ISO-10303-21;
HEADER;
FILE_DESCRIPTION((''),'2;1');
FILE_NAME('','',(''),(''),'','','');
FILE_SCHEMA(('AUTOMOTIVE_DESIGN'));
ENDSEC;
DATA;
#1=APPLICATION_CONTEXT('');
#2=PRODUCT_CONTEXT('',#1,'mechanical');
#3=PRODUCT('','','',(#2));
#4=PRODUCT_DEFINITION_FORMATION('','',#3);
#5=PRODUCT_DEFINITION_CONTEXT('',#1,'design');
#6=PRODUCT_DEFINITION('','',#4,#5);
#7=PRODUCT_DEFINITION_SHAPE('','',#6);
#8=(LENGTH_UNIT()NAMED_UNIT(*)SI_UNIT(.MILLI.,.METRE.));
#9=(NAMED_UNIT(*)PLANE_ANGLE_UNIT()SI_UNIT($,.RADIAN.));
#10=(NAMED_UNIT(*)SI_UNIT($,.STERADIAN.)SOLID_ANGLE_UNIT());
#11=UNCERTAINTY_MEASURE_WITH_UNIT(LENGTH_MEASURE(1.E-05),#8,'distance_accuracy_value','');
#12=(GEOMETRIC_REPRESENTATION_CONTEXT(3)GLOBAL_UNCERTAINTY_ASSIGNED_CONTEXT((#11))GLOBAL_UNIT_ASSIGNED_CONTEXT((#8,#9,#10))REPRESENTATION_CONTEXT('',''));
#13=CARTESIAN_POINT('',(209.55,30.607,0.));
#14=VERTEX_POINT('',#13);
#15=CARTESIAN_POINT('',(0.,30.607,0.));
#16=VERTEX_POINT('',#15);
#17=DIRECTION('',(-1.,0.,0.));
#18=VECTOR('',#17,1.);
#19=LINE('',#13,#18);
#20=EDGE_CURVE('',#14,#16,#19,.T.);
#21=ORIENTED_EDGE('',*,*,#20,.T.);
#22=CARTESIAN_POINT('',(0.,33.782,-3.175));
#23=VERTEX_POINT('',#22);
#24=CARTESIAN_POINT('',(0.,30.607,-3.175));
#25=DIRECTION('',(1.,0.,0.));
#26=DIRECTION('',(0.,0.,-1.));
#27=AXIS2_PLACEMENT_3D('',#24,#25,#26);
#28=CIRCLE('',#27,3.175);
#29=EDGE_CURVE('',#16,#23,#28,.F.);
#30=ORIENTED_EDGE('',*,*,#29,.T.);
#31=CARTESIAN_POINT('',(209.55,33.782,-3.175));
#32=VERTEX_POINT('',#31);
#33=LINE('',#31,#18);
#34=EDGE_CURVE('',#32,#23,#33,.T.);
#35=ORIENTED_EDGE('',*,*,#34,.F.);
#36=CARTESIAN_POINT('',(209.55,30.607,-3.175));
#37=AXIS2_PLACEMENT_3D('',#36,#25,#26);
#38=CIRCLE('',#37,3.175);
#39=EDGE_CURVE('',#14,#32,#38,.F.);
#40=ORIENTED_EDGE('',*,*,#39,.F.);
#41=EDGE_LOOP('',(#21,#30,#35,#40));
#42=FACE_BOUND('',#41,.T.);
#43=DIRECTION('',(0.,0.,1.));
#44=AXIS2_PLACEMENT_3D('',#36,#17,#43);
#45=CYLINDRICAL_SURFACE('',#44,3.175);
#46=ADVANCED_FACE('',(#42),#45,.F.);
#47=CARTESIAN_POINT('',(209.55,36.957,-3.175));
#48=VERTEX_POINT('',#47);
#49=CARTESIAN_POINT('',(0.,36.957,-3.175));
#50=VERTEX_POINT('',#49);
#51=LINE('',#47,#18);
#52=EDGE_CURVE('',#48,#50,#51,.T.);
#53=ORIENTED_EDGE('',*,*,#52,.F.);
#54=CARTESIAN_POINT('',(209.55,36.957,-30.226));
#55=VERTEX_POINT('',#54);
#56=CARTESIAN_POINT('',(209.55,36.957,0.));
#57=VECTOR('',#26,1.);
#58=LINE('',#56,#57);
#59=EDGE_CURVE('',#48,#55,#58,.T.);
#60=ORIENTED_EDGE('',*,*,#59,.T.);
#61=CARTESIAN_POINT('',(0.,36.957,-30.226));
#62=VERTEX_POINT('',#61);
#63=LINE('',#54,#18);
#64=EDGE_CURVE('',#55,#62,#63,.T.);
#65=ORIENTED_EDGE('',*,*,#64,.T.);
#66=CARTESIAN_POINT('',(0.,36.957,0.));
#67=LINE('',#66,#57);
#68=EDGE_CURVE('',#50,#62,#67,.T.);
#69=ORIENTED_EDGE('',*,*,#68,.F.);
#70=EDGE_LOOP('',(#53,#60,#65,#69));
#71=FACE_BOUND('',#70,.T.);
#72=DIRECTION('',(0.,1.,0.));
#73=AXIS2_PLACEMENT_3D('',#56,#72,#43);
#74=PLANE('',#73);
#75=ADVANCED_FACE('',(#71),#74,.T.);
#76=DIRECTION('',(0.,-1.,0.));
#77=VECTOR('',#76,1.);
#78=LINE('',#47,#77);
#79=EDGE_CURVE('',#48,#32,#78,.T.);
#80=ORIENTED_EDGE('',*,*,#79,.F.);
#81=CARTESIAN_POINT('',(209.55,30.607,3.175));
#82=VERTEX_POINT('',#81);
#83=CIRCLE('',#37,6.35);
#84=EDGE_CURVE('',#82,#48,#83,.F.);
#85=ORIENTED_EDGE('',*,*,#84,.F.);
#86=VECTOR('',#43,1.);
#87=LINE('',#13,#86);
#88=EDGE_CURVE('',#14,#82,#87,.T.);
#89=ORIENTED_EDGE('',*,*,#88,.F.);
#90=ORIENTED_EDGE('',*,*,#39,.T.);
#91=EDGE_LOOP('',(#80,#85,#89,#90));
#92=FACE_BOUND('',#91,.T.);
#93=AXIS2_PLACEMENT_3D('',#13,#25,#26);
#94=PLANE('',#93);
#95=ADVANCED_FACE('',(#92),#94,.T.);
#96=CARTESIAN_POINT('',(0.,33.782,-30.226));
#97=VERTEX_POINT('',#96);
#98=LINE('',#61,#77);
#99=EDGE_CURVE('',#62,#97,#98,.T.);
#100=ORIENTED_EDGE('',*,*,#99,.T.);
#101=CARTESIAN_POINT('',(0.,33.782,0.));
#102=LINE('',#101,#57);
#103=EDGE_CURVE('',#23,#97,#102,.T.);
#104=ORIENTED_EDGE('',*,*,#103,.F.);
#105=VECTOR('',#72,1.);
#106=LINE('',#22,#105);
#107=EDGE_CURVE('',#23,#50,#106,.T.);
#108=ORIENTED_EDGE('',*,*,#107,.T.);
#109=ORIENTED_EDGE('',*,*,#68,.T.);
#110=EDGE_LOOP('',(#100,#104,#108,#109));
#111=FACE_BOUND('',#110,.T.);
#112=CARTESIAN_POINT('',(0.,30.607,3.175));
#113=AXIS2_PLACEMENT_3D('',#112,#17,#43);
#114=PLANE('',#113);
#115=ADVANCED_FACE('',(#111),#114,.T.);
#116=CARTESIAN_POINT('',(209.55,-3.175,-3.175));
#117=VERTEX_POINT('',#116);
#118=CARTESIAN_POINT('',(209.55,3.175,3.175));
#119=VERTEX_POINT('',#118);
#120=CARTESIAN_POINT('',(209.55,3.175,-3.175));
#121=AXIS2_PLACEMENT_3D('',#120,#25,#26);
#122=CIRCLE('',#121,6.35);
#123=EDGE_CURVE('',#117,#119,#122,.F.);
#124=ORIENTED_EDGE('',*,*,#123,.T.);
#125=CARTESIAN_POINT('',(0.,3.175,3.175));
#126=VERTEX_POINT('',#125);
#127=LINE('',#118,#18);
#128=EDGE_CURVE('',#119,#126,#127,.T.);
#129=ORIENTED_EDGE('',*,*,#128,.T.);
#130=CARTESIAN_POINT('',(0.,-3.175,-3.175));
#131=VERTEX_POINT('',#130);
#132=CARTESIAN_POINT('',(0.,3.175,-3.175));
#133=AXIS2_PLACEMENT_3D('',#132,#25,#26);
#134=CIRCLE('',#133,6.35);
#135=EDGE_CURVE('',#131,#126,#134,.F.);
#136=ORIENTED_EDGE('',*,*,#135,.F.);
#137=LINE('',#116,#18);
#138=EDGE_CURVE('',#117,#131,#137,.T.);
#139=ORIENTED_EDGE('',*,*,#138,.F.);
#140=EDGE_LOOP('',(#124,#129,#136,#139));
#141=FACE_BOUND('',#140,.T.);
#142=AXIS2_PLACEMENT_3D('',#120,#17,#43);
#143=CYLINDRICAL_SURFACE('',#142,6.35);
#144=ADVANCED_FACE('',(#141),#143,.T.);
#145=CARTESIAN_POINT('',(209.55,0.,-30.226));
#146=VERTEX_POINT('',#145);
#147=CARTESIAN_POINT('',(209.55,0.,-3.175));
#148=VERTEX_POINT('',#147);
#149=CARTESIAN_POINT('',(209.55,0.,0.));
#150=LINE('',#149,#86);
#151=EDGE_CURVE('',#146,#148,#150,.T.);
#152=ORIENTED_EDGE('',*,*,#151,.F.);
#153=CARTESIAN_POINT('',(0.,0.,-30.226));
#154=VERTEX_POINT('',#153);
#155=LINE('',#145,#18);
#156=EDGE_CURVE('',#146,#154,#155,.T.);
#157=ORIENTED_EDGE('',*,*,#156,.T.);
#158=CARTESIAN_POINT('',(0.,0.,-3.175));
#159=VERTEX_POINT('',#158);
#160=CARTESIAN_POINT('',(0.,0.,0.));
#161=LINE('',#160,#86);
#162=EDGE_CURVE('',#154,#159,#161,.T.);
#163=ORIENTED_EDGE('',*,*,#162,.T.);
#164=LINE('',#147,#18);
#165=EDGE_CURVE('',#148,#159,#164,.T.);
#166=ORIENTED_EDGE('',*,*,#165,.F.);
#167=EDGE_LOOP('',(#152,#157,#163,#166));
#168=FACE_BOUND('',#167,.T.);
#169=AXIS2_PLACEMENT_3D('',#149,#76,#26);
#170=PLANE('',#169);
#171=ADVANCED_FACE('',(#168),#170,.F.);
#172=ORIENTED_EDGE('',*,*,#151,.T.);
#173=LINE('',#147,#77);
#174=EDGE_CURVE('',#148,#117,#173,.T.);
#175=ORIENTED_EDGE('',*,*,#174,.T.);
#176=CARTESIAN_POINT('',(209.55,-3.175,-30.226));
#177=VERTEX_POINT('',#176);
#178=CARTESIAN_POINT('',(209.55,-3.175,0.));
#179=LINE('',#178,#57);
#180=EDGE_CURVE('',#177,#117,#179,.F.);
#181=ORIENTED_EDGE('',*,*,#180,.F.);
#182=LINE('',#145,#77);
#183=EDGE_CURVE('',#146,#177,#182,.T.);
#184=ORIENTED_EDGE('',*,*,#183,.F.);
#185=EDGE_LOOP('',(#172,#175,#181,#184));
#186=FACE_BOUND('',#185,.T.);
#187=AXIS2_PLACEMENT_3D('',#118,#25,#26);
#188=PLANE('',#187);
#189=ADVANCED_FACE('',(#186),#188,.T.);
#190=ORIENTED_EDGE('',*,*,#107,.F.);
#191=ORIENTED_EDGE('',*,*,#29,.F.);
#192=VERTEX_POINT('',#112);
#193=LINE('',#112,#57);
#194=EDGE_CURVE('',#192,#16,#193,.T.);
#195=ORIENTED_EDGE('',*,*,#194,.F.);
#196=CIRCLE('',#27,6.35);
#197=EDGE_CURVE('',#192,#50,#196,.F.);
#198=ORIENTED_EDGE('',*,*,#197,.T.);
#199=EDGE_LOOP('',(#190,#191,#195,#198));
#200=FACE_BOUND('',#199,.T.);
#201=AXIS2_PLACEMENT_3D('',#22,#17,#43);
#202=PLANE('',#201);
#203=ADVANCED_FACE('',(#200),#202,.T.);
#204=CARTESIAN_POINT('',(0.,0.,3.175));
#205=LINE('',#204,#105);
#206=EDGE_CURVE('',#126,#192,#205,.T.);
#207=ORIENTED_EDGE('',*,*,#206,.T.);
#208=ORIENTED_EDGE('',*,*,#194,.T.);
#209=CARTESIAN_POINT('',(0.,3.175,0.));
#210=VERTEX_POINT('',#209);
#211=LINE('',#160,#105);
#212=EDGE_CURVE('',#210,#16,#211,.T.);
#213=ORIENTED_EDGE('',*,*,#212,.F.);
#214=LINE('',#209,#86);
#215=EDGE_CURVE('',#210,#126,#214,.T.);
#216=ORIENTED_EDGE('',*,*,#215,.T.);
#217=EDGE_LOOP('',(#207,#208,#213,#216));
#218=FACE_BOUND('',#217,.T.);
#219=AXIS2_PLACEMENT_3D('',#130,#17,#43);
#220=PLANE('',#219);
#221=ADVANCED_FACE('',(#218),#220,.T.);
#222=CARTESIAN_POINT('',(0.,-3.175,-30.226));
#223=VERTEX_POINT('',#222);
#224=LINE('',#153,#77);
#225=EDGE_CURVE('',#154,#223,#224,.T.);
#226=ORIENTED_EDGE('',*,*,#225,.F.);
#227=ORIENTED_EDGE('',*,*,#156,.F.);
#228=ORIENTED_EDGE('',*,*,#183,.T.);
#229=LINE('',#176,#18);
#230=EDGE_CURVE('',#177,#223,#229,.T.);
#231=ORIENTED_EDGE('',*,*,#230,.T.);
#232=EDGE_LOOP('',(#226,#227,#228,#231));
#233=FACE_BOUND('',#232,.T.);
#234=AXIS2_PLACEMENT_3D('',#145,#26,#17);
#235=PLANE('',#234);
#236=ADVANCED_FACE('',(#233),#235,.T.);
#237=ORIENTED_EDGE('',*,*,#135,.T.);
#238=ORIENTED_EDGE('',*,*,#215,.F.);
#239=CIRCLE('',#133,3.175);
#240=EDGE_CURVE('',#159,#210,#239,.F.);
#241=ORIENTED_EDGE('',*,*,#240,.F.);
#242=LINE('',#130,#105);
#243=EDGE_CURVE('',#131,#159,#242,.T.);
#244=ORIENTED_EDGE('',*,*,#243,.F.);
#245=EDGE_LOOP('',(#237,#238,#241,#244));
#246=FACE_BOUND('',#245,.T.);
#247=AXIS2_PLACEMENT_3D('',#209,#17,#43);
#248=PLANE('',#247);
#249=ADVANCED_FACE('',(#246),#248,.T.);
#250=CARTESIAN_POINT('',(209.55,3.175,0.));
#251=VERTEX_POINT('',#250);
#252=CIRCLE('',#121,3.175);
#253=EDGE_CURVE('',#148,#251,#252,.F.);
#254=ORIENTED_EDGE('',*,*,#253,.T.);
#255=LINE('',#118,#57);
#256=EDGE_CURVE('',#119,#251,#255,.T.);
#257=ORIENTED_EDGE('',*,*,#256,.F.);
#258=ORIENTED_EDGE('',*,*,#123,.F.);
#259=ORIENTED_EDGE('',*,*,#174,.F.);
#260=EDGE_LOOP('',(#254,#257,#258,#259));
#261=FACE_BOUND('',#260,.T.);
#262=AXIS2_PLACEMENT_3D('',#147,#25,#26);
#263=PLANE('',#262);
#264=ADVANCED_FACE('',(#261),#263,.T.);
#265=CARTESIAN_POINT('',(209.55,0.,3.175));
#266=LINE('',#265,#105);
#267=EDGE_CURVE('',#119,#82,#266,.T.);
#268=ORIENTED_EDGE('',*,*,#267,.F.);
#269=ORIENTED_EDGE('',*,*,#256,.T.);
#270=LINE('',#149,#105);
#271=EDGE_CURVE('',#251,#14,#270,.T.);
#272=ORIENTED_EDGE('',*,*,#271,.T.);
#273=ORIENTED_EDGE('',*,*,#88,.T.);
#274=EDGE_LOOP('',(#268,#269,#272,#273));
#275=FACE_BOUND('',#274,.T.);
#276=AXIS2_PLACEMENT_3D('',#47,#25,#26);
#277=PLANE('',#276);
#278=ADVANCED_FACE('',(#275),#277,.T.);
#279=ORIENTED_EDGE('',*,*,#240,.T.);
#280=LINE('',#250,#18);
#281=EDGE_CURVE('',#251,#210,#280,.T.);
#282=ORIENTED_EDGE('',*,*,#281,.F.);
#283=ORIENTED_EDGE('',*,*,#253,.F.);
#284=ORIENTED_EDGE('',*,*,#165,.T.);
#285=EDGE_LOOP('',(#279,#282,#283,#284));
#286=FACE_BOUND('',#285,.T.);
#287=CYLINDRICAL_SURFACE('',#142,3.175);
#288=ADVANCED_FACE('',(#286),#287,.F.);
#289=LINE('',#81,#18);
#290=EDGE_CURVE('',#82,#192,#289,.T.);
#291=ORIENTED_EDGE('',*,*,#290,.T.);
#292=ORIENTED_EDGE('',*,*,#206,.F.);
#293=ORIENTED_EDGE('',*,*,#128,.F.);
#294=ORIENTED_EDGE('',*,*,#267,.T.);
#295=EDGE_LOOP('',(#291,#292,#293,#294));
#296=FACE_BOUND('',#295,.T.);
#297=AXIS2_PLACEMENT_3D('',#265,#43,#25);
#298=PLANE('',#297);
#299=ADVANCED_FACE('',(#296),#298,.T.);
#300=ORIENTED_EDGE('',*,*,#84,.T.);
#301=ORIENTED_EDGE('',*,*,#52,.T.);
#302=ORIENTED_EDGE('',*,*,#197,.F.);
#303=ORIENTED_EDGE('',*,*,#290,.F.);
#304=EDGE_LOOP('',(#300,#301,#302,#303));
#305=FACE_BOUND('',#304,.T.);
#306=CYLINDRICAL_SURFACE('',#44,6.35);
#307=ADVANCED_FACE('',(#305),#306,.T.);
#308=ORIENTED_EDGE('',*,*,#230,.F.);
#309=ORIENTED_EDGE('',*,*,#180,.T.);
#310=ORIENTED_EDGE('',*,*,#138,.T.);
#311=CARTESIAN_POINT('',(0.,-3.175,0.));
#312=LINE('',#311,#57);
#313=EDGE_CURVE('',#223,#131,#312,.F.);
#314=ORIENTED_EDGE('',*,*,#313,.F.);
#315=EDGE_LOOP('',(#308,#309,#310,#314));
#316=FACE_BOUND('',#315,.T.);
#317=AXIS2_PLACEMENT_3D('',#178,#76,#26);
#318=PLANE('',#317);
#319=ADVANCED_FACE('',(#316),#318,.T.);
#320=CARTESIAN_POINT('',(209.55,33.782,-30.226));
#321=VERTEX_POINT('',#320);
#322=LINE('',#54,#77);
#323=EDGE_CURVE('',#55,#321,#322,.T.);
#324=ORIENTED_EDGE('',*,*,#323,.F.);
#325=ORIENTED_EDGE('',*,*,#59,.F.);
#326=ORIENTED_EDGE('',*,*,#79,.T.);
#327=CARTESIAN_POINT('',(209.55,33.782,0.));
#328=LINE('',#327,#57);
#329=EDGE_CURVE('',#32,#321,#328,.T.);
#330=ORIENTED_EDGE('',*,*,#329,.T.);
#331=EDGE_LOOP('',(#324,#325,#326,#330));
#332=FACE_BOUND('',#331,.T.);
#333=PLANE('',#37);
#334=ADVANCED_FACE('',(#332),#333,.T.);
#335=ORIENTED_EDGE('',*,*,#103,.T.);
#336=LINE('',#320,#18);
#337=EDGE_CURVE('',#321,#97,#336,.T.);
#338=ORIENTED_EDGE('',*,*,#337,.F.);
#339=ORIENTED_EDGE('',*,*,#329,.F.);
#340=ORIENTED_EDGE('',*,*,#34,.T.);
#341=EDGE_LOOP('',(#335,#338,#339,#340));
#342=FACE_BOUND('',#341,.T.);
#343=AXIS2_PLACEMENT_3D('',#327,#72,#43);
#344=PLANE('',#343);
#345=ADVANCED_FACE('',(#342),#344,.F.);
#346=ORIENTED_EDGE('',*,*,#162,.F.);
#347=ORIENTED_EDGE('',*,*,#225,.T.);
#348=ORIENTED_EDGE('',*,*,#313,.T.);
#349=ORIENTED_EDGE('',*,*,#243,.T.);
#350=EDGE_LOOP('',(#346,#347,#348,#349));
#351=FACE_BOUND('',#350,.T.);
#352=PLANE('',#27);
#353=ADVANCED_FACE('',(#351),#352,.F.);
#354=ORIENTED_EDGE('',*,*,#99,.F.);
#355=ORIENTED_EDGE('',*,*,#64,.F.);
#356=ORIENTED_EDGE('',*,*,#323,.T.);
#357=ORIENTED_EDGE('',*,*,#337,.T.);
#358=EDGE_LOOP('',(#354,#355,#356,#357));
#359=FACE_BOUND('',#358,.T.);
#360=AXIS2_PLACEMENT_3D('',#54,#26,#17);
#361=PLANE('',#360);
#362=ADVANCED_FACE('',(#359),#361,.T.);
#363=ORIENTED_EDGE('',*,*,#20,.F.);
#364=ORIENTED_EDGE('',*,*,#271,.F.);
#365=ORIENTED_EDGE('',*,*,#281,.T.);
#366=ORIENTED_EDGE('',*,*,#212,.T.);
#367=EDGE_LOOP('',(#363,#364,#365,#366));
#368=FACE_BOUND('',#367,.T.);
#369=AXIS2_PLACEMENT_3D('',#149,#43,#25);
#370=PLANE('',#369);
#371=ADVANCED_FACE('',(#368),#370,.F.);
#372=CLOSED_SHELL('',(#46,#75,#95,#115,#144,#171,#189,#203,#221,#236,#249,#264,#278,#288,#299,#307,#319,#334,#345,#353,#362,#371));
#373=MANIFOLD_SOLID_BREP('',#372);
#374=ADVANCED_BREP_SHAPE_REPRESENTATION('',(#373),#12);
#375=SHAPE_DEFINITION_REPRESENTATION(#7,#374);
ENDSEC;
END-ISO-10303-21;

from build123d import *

# Parameters (mm, degrees)
BASE_FLANGE1_DEPTH = 209.55


# Sheet-metal steps are written as plain solids
with BuildPart() as part:
    # Sketch1 → Base-Flange1 (new body)
    with BuildSketch(Plane(origin=(0, 0, 0), x_dir=(0, 0, -1), z_dir=(1, 0, 0))):
        with BuildLine():
            Line((30.226, 33.782), (3.175, 33.782))
            ThreePointArc((3.175, 33.782), (0.92993597, 32.85206403), (0, 30.607))
            Line((0, 30.607), (0, 3.175))
            ThreePointArc((0, 3.175), (0.92993597, 0.92993597), (3.175, 0))
            Line((3.175, 0), (30.226, 0))
            Line((30.226, 0), (30.226, -3.175))
            Line((30.226, -3.175), (3.175, -3.175))
            ThreePointArc((3.175, -3.175), (-1.315128061, -1.315128061), (-3.175, 3.175))
            Line((-3.175, 3.175), (-3.175, 30.607))
            ThreePointArc((-3.175, 30.607), (-1.315128061, 35.097128061), (3.175, 36.957))
            Line((3.175, 36.957), (30.226, 36.957))
            Line((30.226, 36.957), (30.226, 33.782))
        make_face()
    extrude(amount=BASE_FLANGE1_DEPTH)


solid = part.part
